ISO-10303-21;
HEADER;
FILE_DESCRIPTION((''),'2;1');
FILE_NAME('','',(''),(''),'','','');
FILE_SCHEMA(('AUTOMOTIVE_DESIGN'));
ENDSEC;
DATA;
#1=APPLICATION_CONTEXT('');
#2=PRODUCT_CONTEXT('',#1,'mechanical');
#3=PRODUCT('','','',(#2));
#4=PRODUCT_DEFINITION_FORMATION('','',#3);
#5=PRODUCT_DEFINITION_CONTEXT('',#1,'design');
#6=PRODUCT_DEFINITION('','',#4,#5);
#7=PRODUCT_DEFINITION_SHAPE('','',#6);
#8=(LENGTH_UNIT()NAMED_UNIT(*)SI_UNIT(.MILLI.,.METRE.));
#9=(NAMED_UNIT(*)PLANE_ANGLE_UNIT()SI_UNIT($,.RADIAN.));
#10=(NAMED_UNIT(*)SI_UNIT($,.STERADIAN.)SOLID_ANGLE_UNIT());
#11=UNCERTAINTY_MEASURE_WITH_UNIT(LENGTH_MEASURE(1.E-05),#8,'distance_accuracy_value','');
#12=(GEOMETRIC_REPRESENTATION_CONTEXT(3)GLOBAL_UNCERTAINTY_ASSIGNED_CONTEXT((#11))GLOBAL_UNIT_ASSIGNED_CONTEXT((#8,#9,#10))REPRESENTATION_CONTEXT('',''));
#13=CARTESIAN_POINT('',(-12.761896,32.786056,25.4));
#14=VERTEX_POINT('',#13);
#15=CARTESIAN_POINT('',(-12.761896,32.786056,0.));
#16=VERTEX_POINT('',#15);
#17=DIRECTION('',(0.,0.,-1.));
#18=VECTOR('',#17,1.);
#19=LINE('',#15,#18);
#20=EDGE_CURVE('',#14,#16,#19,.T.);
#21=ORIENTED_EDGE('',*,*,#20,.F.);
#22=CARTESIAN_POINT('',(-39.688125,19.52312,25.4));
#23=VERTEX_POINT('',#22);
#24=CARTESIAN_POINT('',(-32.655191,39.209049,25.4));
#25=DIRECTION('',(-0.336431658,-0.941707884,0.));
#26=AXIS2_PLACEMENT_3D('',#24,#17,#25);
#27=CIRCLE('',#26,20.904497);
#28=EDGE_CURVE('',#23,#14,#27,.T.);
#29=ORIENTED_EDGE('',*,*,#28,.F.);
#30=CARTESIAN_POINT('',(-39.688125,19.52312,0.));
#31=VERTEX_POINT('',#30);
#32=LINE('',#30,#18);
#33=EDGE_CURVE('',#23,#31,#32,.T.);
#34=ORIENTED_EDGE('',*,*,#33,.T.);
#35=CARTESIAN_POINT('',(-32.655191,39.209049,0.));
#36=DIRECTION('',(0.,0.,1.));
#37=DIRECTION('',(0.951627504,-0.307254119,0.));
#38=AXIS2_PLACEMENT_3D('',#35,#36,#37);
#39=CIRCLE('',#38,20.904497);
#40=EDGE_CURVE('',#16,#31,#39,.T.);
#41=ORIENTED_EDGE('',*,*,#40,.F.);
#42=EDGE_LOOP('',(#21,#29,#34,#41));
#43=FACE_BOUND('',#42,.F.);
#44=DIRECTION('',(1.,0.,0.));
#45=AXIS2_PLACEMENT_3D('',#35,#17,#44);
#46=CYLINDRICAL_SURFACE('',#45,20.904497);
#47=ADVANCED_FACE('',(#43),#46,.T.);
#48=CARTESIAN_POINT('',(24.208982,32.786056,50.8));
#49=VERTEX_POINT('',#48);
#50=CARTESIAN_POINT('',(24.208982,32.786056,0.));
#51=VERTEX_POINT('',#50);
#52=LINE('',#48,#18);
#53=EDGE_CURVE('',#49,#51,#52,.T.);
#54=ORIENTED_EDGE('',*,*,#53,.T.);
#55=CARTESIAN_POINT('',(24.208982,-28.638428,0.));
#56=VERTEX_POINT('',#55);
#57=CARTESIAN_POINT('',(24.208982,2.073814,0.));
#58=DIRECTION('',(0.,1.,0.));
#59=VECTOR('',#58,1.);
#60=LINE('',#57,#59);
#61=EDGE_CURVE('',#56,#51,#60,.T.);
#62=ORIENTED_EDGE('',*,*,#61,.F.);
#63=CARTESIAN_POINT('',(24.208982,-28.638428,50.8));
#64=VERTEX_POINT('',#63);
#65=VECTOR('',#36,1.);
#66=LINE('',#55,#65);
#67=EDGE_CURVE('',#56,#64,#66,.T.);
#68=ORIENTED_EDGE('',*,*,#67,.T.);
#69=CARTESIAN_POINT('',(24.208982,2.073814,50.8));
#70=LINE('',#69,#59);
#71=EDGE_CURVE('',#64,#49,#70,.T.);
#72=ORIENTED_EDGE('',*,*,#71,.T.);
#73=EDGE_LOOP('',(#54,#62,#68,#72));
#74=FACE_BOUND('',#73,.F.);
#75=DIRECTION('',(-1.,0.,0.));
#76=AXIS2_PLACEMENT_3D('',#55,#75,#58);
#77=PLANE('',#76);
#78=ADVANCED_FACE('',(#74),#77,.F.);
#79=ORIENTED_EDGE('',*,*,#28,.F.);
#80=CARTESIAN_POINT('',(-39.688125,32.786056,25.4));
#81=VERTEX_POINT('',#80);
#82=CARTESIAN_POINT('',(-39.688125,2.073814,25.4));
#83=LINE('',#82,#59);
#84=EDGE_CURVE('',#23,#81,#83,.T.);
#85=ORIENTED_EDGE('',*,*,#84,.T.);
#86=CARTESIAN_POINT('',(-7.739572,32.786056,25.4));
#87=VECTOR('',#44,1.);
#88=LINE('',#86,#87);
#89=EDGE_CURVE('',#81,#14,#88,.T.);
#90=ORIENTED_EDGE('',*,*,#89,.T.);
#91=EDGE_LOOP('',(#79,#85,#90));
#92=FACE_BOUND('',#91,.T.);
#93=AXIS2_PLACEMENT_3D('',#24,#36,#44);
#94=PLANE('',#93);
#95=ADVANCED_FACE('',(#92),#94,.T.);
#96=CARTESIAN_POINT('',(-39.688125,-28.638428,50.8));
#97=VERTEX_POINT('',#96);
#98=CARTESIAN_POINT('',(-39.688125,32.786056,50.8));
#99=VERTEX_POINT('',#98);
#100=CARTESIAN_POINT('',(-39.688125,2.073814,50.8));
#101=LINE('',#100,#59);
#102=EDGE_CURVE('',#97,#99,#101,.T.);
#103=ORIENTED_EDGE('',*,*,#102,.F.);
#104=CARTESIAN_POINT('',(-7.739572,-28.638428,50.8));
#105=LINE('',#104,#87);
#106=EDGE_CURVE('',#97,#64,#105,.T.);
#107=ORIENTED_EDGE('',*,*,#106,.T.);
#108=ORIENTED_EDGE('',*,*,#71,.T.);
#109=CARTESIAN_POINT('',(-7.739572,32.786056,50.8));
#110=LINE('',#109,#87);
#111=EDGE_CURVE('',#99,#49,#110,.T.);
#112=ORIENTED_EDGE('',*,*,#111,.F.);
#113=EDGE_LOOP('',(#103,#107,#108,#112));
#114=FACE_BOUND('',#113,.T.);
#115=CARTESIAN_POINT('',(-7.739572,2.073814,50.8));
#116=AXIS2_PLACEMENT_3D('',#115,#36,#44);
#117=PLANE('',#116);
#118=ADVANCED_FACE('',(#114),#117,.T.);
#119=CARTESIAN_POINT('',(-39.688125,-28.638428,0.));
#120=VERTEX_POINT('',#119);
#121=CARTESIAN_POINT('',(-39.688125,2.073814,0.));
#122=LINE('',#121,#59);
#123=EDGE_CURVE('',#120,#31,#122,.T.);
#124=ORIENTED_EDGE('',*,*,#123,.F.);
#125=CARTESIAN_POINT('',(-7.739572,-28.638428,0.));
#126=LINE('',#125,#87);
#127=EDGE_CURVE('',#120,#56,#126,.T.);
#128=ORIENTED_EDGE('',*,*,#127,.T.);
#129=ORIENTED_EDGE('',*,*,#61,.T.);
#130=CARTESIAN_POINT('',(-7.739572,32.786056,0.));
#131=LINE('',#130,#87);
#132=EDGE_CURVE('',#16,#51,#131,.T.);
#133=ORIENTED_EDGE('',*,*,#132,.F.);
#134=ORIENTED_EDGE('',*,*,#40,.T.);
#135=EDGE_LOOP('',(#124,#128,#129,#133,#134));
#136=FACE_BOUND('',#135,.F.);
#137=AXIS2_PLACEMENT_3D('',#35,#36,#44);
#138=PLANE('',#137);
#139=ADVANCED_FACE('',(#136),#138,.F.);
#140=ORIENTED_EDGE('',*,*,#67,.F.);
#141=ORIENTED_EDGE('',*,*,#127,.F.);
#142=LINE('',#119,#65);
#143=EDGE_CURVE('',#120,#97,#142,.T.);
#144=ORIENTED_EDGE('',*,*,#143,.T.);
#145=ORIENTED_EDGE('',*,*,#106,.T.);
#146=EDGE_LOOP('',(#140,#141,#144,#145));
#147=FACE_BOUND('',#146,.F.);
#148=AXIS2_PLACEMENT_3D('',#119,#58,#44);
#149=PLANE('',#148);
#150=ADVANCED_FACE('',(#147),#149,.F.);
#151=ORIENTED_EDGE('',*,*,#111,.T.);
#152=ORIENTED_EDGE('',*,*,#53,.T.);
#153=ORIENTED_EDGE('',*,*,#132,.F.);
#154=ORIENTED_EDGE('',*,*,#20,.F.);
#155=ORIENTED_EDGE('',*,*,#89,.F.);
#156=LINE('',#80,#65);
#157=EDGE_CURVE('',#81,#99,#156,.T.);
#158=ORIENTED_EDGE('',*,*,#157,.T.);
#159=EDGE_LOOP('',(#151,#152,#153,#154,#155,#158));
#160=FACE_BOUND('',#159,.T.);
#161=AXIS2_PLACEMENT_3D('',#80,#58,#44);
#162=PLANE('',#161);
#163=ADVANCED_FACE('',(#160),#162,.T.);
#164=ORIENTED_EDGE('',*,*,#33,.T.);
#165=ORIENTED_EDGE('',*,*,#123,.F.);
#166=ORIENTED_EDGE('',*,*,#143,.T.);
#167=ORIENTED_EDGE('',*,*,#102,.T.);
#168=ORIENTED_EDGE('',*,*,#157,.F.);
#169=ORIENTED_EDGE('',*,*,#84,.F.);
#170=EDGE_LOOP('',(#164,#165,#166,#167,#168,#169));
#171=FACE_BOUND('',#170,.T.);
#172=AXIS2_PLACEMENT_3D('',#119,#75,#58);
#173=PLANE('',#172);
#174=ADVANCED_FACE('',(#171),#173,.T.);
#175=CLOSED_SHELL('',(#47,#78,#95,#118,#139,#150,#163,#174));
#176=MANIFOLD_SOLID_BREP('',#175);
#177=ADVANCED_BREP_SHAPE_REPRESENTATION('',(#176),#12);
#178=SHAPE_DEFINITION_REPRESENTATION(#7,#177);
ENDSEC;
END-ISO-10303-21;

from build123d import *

# Parameters (mm, degrees)
F0_W      = 63.8971067965
F0_H      = 61.4244844764
F1_DEPTH  = 25.4
F2_R      = 20.9044969904
F1_FACE_W = 63.8971067965
F1_FACE_H = 61.4244844764
F3_DEPTH  = 25.4


# Not quite as in the source:
# - a feature of the source that left no trace in its solid (it failed there, or was rolled back) is left out


with BuildPart() as f1:
    # F0 (on Top) → F1 (new body)
    with BuildSketch(Plane.XY):
        with Locations((-7.7395718545, 2.0738141611)):
            Rectangle(F0_W, F0_H)
    extrude(amount=F1_DEPTH)

    # F2 (on Top) + F1_face (on face) → F3 (join)
    with BuildSketch(Plane.XY):
        with Locations((-32.6551906765, 39.2090491951)):
            Circle(F2_R)
    with BuildSketch(Plane(origin=(-7.7395718545, 2.0738141611, 25.4), x_dir=(1, 0, 0), z_dir=(0, 0, 1))):
        Rectangle(F1_FACE_W, F1_FACE_H)
    extrude(amount=F3_DEPTH)


solid = f1.part
